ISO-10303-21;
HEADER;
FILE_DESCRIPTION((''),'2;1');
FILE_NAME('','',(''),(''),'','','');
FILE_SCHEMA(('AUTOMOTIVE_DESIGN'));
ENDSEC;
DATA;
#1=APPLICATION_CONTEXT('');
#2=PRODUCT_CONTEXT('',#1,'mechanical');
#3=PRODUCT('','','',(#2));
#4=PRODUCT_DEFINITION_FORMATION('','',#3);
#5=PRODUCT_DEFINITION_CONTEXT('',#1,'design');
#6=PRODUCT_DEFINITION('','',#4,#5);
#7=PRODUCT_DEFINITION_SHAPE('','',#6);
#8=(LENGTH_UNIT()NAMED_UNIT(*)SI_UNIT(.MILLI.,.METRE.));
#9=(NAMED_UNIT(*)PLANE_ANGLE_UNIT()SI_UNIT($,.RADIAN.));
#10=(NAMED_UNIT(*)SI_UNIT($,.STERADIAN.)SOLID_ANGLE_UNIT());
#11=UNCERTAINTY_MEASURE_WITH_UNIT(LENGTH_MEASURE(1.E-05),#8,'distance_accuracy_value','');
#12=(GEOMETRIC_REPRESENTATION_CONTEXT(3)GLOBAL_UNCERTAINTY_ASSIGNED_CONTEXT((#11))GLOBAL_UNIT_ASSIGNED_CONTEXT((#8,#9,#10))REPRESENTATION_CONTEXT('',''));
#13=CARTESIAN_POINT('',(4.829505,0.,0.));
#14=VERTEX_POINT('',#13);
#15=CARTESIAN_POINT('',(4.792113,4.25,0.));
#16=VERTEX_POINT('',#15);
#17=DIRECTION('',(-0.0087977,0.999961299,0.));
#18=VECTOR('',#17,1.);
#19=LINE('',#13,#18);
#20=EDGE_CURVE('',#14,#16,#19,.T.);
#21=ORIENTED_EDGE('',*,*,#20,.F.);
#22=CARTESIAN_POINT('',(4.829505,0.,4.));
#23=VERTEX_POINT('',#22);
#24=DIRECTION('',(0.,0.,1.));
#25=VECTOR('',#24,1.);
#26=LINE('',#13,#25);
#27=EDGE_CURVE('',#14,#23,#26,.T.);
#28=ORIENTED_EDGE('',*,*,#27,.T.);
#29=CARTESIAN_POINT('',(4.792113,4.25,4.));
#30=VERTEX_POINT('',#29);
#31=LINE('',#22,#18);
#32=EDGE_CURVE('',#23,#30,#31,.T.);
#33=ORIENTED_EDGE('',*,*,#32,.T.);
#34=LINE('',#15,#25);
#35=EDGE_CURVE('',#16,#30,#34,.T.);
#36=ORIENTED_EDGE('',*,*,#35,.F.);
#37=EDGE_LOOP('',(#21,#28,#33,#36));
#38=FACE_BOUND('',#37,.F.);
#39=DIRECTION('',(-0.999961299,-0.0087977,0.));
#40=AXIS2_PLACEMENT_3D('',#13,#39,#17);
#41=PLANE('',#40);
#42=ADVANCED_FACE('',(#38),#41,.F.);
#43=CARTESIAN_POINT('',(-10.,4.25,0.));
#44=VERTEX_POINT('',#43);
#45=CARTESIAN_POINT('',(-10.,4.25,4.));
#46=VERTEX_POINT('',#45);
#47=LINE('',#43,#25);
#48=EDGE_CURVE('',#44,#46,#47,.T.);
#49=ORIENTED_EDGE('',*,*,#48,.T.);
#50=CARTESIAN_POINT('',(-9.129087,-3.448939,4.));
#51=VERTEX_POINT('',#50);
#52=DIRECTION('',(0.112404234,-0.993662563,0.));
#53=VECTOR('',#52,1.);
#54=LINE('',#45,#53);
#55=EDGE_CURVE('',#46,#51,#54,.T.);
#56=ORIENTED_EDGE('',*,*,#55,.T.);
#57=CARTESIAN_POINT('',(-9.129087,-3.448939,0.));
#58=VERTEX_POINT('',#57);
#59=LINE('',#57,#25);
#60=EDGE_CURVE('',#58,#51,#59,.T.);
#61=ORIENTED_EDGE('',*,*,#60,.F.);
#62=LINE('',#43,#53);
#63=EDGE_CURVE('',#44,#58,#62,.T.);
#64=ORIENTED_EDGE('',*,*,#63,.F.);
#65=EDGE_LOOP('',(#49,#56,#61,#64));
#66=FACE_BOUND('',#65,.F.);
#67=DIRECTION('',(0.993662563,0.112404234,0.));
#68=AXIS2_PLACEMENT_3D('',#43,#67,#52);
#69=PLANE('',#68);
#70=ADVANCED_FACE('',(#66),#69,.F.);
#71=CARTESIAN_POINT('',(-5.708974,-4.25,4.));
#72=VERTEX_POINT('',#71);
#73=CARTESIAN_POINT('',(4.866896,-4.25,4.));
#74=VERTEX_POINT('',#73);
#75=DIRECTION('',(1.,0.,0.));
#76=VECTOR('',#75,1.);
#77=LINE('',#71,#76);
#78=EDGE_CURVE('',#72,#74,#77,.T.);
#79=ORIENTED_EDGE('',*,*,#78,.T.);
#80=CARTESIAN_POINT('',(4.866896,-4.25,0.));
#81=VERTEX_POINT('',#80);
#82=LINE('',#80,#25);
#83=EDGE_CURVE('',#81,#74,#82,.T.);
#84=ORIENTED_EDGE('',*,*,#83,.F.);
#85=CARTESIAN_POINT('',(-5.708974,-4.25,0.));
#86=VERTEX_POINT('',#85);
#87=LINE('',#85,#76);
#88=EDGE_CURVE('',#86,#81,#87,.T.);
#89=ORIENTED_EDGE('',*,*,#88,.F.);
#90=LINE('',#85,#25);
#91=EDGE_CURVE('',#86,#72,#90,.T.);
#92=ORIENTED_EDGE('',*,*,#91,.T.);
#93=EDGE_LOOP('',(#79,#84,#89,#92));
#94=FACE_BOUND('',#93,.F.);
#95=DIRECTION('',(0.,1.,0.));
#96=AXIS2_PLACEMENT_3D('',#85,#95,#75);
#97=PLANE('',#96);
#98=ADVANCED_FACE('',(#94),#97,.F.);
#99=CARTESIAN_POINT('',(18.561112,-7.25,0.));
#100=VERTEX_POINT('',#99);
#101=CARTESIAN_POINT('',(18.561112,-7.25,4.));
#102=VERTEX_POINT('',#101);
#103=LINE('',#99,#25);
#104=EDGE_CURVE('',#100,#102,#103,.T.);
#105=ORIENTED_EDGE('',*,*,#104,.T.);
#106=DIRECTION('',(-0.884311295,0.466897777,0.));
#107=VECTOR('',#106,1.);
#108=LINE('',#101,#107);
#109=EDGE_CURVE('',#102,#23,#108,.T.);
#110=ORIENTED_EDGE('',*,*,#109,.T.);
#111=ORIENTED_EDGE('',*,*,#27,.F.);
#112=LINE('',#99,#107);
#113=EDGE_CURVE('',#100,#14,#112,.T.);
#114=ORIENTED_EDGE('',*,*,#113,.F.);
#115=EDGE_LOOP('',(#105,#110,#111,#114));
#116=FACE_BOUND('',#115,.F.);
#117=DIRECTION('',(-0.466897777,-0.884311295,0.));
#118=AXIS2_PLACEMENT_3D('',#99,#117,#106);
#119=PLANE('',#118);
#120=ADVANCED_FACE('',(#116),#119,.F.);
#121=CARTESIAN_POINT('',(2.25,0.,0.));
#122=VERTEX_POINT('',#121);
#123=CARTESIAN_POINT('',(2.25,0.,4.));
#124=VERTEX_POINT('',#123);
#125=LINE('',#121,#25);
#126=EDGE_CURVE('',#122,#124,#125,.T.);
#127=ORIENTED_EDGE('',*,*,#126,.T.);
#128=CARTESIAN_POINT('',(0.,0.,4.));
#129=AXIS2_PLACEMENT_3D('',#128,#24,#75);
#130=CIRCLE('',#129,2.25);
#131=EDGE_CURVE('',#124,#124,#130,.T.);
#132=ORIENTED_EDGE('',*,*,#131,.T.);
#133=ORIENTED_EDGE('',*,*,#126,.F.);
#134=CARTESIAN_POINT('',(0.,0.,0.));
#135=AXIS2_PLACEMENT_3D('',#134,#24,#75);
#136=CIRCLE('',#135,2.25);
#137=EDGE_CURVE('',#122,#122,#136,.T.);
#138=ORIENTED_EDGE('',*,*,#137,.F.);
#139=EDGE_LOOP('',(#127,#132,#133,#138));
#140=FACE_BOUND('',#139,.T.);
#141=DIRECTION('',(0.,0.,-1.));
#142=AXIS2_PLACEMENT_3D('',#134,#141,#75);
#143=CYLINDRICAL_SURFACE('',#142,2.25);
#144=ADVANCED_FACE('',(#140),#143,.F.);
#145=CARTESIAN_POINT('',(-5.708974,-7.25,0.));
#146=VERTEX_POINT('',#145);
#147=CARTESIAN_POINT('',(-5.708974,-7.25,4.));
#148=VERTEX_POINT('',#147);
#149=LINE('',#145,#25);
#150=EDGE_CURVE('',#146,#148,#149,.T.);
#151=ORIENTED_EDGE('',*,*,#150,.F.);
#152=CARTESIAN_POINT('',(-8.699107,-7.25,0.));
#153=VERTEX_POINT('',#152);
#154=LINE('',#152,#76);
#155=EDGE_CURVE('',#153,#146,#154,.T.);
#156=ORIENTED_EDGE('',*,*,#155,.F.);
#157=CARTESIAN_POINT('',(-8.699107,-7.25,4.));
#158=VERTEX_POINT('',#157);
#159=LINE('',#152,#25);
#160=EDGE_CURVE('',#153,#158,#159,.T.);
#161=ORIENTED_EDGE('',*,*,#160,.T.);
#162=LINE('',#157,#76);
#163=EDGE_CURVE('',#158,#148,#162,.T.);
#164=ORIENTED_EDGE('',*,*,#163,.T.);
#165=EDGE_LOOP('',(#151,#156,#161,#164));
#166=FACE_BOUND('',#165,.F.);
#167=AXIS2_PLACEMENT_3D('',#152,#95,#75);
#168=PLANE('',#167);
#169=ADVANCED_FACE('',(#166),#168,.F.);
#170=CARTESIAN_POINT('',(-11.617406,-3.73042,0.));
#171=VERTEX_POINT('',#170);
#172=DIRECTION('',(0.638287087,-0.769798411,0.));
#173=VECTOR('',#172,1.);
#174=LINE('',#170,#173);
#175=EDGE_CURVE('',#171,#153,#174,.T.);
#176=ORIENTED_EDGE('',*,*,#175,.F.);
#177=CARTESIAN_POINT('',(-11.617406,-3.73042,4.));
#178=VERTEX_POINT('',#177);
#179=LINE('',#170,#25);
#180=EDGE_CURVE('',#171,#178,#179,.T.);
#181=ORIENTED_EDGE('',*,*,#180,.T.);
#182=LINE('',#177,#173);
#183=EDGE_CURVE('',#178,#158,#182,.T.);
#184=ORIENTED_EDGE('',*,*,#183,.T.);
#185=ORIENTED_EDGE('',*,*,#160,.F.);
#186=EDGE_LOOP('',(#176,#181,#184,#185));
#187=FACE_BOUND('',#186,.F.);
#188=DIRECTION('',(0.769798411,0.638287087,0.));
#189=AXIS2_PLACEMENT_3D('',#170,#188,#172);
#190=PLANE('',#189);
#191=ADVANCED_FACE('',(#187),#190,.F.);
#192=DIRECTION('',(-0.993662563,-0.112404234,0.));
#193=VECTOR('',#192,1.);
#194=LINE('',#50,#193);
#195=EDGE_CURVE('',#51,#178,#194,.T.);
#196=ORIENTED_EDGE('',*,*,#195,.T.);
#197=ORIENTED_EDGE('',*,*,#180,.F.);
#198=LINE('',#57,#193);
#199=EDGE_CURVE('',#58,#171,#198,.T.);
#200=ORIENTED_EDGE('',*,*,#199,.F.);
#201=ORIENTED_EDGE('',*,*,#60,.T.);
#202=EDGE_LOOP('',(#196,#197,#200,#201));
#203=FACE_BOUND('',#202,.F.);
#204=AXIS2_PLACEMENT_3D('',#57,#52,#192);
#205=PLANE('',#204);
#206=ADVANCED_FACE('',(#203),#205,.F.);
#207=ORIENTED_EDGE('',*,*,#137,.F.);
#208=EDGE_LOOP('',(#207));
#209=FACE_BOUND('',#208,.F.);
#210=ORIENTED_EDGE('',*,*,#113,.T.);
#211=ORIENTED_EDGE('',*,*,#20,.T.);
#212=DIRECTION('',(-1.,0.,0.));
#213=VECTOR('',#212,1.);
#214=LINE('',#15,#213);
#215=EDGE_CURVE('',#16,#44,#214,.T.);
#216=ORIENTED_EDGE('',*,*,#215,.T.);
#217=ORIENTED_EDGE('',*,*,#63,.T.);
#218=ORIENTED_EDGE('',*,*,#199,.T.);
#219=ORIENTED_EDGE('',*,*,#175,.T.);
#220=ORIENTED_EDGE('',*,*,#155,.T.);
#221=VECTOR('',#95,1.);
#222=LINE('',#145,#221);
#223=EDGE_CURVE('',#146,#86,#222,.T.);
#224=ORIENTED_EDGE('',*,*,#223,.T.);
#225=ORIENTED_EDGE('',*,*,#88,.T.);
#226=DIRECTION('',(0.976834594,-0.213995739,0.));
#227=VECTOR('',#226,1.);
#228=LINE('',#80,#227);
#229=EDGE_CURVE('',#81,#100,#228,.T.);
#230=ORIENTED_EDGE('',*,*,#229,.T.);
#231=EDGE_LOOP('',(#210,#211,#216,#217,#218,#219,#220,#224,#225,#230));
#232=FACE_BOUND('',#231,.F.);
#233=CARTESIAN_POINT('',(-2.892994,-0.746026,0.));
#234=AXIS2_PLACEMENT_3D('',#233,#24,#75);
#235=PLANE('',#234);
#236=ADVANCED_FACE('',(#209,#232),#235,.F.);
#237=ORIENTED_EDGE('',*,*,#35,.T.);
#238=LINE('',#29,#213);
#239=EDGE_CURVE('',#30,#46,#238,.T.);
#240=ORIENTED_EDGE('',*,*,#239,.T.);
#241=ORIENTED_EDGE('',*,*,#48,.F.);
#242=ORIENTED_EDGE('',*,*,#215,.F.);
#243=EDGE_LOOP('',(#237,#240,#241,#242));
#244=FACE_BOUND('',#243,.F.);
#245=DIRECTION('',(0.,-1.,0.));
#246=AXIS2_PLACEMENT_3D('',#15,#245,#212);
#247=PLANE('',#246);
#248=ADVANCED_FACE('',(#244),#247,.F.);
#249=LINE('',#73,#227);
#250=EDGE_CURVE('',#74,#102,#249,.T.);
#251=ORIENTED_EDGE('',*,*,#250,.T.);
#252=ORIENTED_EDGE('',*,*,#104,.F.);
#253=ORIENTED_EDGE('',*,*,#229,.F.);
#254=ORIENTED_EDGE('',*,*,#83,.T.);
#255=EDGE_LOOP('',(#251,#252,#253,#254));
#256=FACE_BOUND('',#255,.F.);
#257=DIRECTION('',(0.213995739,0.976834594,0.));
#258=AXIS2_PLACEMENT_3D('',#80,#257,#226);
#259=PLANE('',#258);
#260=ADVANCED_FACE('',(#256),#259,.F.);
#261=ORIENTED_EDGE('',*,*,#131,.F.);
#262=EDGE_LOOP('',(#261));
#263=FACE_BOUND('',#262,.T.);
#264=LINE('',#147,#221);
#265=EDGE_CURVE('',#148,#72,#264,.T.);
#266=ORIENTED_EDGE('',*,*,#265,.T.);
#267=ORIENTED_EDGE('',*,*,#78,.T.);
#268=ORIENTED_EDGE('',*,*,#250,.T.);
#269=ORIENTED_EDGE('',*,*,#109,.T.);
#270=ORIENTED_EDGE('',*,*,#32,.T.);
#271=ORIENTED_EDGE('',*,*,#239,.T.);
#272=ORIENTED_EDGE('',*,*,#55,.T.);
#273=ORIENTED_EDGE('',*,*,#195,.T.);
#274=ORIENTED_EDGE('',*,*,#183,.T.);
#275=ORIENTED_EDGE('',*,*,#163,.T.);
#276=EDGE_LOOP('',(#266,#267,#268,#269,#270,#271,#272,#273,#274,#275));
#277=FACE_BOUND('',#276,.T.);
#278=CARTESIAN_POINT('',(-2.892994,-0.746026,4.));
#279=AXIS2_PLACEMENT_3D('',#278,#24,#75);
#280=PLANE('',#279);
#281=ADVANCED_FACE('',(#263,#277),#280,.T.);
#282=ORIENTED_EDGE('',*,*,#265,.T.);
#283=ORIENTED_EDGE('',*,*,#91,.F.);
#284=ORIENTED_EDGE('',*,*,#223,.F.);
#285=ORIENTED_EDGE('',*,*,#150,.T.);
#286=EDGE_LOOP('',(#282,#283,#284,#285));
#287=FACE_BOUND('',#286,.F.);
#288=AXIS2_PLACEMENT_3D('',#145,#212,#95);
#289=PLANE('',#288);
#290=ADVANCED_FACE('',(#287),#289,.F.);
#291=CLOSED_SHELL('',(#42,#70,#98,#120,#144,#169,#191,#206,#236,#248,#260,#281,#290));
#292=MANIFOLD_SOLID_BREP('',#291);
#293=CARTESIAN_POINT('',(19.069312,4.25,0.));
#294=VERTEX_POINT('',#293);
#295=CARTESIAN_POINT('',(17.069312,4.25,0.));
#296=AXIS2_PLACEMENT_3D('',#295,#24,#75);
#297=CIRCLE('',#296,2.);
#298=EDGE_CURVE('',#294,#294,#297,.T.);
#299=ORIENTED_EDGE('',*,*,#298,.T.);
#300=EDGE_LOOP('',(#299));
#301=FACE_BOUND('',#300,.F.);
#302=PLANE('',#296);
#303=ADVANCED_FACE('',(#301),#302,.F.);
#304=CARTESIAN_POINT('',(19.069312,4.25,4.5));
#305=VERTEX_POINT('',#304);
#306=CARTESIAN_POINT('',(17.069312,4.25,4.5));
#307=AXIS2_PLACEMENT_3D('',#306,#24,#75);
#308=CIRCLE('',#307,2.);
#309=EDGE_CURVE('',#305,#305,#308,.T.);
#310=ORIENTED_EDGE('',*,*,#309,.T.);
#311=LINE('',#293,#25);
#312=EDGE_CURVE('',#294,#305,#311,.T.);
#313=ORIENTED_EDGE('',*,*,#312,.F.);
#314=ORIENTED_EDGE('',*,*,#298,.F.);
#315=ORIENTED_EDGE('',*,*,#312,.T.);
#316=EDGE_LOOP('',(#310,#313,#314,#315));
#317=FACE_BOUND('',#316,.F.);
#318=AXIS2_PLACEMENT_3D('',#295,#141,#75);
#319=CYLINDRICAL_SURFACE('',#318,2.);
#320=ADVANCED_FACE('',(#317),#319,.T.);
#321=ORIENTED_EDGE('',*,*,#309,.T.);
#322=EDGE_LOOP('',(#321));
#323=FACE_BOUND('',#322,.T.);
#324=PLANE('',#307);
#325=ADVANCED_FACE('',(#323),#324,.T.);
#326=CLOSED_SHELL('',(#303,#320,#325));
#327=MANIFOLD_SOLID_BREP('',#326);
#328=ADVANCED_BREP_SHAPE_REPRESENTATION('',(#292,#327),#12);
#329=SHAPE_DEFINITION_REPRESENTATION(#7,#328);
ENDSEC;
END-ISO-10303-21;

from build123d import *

# Parameters (mm, degrees)
F0_R     = 2.25
F1_DEPTH = 4
F0_R_2   = 2
F2_DEPTH = 4.5


# Not quite as in the source:
# - a feature names something its author has since deleted; it is built from what else it names


with BuildPart() as f1:
    # F0 (on Top) → F1 (new body)
    with BuildSketch(Plane.XY):
        Polygon((-8.6991069838, -7.25), (-5.7089743204, -7.25), (-5.7089743204, -4.25), (4.8668961972, -4.25), (4.8295045272, 0), (4.7921128571, 4.25), (-10, 4.25), (-9.1290873029, -3.4489390308), align=None)
        Circle(F0_R, mode=Mode.SUBTRACT)
        Polygon((4.8295045272, 0), (4.8668961972, -4.25), (18.5611117631, -7.25), align=None)
        Polygon((-11.6174062714, -3.7304204889), (-8.6991069838, -7.25), (-9.1290873029, -3.4489390308), align=None)
    extrude(amount=F1_DEPTH)


with BuildPart() as f2:
    # F0 (on Top) → F2 (new body)
    with BuildSketch(Plane.XY):
        with Locations((17.0693118125, 4.25)):
            Circle(F0_R_2)
    extrude(amount=F2_DEPTH)


solid = Compound([f1.part, f2.part])
